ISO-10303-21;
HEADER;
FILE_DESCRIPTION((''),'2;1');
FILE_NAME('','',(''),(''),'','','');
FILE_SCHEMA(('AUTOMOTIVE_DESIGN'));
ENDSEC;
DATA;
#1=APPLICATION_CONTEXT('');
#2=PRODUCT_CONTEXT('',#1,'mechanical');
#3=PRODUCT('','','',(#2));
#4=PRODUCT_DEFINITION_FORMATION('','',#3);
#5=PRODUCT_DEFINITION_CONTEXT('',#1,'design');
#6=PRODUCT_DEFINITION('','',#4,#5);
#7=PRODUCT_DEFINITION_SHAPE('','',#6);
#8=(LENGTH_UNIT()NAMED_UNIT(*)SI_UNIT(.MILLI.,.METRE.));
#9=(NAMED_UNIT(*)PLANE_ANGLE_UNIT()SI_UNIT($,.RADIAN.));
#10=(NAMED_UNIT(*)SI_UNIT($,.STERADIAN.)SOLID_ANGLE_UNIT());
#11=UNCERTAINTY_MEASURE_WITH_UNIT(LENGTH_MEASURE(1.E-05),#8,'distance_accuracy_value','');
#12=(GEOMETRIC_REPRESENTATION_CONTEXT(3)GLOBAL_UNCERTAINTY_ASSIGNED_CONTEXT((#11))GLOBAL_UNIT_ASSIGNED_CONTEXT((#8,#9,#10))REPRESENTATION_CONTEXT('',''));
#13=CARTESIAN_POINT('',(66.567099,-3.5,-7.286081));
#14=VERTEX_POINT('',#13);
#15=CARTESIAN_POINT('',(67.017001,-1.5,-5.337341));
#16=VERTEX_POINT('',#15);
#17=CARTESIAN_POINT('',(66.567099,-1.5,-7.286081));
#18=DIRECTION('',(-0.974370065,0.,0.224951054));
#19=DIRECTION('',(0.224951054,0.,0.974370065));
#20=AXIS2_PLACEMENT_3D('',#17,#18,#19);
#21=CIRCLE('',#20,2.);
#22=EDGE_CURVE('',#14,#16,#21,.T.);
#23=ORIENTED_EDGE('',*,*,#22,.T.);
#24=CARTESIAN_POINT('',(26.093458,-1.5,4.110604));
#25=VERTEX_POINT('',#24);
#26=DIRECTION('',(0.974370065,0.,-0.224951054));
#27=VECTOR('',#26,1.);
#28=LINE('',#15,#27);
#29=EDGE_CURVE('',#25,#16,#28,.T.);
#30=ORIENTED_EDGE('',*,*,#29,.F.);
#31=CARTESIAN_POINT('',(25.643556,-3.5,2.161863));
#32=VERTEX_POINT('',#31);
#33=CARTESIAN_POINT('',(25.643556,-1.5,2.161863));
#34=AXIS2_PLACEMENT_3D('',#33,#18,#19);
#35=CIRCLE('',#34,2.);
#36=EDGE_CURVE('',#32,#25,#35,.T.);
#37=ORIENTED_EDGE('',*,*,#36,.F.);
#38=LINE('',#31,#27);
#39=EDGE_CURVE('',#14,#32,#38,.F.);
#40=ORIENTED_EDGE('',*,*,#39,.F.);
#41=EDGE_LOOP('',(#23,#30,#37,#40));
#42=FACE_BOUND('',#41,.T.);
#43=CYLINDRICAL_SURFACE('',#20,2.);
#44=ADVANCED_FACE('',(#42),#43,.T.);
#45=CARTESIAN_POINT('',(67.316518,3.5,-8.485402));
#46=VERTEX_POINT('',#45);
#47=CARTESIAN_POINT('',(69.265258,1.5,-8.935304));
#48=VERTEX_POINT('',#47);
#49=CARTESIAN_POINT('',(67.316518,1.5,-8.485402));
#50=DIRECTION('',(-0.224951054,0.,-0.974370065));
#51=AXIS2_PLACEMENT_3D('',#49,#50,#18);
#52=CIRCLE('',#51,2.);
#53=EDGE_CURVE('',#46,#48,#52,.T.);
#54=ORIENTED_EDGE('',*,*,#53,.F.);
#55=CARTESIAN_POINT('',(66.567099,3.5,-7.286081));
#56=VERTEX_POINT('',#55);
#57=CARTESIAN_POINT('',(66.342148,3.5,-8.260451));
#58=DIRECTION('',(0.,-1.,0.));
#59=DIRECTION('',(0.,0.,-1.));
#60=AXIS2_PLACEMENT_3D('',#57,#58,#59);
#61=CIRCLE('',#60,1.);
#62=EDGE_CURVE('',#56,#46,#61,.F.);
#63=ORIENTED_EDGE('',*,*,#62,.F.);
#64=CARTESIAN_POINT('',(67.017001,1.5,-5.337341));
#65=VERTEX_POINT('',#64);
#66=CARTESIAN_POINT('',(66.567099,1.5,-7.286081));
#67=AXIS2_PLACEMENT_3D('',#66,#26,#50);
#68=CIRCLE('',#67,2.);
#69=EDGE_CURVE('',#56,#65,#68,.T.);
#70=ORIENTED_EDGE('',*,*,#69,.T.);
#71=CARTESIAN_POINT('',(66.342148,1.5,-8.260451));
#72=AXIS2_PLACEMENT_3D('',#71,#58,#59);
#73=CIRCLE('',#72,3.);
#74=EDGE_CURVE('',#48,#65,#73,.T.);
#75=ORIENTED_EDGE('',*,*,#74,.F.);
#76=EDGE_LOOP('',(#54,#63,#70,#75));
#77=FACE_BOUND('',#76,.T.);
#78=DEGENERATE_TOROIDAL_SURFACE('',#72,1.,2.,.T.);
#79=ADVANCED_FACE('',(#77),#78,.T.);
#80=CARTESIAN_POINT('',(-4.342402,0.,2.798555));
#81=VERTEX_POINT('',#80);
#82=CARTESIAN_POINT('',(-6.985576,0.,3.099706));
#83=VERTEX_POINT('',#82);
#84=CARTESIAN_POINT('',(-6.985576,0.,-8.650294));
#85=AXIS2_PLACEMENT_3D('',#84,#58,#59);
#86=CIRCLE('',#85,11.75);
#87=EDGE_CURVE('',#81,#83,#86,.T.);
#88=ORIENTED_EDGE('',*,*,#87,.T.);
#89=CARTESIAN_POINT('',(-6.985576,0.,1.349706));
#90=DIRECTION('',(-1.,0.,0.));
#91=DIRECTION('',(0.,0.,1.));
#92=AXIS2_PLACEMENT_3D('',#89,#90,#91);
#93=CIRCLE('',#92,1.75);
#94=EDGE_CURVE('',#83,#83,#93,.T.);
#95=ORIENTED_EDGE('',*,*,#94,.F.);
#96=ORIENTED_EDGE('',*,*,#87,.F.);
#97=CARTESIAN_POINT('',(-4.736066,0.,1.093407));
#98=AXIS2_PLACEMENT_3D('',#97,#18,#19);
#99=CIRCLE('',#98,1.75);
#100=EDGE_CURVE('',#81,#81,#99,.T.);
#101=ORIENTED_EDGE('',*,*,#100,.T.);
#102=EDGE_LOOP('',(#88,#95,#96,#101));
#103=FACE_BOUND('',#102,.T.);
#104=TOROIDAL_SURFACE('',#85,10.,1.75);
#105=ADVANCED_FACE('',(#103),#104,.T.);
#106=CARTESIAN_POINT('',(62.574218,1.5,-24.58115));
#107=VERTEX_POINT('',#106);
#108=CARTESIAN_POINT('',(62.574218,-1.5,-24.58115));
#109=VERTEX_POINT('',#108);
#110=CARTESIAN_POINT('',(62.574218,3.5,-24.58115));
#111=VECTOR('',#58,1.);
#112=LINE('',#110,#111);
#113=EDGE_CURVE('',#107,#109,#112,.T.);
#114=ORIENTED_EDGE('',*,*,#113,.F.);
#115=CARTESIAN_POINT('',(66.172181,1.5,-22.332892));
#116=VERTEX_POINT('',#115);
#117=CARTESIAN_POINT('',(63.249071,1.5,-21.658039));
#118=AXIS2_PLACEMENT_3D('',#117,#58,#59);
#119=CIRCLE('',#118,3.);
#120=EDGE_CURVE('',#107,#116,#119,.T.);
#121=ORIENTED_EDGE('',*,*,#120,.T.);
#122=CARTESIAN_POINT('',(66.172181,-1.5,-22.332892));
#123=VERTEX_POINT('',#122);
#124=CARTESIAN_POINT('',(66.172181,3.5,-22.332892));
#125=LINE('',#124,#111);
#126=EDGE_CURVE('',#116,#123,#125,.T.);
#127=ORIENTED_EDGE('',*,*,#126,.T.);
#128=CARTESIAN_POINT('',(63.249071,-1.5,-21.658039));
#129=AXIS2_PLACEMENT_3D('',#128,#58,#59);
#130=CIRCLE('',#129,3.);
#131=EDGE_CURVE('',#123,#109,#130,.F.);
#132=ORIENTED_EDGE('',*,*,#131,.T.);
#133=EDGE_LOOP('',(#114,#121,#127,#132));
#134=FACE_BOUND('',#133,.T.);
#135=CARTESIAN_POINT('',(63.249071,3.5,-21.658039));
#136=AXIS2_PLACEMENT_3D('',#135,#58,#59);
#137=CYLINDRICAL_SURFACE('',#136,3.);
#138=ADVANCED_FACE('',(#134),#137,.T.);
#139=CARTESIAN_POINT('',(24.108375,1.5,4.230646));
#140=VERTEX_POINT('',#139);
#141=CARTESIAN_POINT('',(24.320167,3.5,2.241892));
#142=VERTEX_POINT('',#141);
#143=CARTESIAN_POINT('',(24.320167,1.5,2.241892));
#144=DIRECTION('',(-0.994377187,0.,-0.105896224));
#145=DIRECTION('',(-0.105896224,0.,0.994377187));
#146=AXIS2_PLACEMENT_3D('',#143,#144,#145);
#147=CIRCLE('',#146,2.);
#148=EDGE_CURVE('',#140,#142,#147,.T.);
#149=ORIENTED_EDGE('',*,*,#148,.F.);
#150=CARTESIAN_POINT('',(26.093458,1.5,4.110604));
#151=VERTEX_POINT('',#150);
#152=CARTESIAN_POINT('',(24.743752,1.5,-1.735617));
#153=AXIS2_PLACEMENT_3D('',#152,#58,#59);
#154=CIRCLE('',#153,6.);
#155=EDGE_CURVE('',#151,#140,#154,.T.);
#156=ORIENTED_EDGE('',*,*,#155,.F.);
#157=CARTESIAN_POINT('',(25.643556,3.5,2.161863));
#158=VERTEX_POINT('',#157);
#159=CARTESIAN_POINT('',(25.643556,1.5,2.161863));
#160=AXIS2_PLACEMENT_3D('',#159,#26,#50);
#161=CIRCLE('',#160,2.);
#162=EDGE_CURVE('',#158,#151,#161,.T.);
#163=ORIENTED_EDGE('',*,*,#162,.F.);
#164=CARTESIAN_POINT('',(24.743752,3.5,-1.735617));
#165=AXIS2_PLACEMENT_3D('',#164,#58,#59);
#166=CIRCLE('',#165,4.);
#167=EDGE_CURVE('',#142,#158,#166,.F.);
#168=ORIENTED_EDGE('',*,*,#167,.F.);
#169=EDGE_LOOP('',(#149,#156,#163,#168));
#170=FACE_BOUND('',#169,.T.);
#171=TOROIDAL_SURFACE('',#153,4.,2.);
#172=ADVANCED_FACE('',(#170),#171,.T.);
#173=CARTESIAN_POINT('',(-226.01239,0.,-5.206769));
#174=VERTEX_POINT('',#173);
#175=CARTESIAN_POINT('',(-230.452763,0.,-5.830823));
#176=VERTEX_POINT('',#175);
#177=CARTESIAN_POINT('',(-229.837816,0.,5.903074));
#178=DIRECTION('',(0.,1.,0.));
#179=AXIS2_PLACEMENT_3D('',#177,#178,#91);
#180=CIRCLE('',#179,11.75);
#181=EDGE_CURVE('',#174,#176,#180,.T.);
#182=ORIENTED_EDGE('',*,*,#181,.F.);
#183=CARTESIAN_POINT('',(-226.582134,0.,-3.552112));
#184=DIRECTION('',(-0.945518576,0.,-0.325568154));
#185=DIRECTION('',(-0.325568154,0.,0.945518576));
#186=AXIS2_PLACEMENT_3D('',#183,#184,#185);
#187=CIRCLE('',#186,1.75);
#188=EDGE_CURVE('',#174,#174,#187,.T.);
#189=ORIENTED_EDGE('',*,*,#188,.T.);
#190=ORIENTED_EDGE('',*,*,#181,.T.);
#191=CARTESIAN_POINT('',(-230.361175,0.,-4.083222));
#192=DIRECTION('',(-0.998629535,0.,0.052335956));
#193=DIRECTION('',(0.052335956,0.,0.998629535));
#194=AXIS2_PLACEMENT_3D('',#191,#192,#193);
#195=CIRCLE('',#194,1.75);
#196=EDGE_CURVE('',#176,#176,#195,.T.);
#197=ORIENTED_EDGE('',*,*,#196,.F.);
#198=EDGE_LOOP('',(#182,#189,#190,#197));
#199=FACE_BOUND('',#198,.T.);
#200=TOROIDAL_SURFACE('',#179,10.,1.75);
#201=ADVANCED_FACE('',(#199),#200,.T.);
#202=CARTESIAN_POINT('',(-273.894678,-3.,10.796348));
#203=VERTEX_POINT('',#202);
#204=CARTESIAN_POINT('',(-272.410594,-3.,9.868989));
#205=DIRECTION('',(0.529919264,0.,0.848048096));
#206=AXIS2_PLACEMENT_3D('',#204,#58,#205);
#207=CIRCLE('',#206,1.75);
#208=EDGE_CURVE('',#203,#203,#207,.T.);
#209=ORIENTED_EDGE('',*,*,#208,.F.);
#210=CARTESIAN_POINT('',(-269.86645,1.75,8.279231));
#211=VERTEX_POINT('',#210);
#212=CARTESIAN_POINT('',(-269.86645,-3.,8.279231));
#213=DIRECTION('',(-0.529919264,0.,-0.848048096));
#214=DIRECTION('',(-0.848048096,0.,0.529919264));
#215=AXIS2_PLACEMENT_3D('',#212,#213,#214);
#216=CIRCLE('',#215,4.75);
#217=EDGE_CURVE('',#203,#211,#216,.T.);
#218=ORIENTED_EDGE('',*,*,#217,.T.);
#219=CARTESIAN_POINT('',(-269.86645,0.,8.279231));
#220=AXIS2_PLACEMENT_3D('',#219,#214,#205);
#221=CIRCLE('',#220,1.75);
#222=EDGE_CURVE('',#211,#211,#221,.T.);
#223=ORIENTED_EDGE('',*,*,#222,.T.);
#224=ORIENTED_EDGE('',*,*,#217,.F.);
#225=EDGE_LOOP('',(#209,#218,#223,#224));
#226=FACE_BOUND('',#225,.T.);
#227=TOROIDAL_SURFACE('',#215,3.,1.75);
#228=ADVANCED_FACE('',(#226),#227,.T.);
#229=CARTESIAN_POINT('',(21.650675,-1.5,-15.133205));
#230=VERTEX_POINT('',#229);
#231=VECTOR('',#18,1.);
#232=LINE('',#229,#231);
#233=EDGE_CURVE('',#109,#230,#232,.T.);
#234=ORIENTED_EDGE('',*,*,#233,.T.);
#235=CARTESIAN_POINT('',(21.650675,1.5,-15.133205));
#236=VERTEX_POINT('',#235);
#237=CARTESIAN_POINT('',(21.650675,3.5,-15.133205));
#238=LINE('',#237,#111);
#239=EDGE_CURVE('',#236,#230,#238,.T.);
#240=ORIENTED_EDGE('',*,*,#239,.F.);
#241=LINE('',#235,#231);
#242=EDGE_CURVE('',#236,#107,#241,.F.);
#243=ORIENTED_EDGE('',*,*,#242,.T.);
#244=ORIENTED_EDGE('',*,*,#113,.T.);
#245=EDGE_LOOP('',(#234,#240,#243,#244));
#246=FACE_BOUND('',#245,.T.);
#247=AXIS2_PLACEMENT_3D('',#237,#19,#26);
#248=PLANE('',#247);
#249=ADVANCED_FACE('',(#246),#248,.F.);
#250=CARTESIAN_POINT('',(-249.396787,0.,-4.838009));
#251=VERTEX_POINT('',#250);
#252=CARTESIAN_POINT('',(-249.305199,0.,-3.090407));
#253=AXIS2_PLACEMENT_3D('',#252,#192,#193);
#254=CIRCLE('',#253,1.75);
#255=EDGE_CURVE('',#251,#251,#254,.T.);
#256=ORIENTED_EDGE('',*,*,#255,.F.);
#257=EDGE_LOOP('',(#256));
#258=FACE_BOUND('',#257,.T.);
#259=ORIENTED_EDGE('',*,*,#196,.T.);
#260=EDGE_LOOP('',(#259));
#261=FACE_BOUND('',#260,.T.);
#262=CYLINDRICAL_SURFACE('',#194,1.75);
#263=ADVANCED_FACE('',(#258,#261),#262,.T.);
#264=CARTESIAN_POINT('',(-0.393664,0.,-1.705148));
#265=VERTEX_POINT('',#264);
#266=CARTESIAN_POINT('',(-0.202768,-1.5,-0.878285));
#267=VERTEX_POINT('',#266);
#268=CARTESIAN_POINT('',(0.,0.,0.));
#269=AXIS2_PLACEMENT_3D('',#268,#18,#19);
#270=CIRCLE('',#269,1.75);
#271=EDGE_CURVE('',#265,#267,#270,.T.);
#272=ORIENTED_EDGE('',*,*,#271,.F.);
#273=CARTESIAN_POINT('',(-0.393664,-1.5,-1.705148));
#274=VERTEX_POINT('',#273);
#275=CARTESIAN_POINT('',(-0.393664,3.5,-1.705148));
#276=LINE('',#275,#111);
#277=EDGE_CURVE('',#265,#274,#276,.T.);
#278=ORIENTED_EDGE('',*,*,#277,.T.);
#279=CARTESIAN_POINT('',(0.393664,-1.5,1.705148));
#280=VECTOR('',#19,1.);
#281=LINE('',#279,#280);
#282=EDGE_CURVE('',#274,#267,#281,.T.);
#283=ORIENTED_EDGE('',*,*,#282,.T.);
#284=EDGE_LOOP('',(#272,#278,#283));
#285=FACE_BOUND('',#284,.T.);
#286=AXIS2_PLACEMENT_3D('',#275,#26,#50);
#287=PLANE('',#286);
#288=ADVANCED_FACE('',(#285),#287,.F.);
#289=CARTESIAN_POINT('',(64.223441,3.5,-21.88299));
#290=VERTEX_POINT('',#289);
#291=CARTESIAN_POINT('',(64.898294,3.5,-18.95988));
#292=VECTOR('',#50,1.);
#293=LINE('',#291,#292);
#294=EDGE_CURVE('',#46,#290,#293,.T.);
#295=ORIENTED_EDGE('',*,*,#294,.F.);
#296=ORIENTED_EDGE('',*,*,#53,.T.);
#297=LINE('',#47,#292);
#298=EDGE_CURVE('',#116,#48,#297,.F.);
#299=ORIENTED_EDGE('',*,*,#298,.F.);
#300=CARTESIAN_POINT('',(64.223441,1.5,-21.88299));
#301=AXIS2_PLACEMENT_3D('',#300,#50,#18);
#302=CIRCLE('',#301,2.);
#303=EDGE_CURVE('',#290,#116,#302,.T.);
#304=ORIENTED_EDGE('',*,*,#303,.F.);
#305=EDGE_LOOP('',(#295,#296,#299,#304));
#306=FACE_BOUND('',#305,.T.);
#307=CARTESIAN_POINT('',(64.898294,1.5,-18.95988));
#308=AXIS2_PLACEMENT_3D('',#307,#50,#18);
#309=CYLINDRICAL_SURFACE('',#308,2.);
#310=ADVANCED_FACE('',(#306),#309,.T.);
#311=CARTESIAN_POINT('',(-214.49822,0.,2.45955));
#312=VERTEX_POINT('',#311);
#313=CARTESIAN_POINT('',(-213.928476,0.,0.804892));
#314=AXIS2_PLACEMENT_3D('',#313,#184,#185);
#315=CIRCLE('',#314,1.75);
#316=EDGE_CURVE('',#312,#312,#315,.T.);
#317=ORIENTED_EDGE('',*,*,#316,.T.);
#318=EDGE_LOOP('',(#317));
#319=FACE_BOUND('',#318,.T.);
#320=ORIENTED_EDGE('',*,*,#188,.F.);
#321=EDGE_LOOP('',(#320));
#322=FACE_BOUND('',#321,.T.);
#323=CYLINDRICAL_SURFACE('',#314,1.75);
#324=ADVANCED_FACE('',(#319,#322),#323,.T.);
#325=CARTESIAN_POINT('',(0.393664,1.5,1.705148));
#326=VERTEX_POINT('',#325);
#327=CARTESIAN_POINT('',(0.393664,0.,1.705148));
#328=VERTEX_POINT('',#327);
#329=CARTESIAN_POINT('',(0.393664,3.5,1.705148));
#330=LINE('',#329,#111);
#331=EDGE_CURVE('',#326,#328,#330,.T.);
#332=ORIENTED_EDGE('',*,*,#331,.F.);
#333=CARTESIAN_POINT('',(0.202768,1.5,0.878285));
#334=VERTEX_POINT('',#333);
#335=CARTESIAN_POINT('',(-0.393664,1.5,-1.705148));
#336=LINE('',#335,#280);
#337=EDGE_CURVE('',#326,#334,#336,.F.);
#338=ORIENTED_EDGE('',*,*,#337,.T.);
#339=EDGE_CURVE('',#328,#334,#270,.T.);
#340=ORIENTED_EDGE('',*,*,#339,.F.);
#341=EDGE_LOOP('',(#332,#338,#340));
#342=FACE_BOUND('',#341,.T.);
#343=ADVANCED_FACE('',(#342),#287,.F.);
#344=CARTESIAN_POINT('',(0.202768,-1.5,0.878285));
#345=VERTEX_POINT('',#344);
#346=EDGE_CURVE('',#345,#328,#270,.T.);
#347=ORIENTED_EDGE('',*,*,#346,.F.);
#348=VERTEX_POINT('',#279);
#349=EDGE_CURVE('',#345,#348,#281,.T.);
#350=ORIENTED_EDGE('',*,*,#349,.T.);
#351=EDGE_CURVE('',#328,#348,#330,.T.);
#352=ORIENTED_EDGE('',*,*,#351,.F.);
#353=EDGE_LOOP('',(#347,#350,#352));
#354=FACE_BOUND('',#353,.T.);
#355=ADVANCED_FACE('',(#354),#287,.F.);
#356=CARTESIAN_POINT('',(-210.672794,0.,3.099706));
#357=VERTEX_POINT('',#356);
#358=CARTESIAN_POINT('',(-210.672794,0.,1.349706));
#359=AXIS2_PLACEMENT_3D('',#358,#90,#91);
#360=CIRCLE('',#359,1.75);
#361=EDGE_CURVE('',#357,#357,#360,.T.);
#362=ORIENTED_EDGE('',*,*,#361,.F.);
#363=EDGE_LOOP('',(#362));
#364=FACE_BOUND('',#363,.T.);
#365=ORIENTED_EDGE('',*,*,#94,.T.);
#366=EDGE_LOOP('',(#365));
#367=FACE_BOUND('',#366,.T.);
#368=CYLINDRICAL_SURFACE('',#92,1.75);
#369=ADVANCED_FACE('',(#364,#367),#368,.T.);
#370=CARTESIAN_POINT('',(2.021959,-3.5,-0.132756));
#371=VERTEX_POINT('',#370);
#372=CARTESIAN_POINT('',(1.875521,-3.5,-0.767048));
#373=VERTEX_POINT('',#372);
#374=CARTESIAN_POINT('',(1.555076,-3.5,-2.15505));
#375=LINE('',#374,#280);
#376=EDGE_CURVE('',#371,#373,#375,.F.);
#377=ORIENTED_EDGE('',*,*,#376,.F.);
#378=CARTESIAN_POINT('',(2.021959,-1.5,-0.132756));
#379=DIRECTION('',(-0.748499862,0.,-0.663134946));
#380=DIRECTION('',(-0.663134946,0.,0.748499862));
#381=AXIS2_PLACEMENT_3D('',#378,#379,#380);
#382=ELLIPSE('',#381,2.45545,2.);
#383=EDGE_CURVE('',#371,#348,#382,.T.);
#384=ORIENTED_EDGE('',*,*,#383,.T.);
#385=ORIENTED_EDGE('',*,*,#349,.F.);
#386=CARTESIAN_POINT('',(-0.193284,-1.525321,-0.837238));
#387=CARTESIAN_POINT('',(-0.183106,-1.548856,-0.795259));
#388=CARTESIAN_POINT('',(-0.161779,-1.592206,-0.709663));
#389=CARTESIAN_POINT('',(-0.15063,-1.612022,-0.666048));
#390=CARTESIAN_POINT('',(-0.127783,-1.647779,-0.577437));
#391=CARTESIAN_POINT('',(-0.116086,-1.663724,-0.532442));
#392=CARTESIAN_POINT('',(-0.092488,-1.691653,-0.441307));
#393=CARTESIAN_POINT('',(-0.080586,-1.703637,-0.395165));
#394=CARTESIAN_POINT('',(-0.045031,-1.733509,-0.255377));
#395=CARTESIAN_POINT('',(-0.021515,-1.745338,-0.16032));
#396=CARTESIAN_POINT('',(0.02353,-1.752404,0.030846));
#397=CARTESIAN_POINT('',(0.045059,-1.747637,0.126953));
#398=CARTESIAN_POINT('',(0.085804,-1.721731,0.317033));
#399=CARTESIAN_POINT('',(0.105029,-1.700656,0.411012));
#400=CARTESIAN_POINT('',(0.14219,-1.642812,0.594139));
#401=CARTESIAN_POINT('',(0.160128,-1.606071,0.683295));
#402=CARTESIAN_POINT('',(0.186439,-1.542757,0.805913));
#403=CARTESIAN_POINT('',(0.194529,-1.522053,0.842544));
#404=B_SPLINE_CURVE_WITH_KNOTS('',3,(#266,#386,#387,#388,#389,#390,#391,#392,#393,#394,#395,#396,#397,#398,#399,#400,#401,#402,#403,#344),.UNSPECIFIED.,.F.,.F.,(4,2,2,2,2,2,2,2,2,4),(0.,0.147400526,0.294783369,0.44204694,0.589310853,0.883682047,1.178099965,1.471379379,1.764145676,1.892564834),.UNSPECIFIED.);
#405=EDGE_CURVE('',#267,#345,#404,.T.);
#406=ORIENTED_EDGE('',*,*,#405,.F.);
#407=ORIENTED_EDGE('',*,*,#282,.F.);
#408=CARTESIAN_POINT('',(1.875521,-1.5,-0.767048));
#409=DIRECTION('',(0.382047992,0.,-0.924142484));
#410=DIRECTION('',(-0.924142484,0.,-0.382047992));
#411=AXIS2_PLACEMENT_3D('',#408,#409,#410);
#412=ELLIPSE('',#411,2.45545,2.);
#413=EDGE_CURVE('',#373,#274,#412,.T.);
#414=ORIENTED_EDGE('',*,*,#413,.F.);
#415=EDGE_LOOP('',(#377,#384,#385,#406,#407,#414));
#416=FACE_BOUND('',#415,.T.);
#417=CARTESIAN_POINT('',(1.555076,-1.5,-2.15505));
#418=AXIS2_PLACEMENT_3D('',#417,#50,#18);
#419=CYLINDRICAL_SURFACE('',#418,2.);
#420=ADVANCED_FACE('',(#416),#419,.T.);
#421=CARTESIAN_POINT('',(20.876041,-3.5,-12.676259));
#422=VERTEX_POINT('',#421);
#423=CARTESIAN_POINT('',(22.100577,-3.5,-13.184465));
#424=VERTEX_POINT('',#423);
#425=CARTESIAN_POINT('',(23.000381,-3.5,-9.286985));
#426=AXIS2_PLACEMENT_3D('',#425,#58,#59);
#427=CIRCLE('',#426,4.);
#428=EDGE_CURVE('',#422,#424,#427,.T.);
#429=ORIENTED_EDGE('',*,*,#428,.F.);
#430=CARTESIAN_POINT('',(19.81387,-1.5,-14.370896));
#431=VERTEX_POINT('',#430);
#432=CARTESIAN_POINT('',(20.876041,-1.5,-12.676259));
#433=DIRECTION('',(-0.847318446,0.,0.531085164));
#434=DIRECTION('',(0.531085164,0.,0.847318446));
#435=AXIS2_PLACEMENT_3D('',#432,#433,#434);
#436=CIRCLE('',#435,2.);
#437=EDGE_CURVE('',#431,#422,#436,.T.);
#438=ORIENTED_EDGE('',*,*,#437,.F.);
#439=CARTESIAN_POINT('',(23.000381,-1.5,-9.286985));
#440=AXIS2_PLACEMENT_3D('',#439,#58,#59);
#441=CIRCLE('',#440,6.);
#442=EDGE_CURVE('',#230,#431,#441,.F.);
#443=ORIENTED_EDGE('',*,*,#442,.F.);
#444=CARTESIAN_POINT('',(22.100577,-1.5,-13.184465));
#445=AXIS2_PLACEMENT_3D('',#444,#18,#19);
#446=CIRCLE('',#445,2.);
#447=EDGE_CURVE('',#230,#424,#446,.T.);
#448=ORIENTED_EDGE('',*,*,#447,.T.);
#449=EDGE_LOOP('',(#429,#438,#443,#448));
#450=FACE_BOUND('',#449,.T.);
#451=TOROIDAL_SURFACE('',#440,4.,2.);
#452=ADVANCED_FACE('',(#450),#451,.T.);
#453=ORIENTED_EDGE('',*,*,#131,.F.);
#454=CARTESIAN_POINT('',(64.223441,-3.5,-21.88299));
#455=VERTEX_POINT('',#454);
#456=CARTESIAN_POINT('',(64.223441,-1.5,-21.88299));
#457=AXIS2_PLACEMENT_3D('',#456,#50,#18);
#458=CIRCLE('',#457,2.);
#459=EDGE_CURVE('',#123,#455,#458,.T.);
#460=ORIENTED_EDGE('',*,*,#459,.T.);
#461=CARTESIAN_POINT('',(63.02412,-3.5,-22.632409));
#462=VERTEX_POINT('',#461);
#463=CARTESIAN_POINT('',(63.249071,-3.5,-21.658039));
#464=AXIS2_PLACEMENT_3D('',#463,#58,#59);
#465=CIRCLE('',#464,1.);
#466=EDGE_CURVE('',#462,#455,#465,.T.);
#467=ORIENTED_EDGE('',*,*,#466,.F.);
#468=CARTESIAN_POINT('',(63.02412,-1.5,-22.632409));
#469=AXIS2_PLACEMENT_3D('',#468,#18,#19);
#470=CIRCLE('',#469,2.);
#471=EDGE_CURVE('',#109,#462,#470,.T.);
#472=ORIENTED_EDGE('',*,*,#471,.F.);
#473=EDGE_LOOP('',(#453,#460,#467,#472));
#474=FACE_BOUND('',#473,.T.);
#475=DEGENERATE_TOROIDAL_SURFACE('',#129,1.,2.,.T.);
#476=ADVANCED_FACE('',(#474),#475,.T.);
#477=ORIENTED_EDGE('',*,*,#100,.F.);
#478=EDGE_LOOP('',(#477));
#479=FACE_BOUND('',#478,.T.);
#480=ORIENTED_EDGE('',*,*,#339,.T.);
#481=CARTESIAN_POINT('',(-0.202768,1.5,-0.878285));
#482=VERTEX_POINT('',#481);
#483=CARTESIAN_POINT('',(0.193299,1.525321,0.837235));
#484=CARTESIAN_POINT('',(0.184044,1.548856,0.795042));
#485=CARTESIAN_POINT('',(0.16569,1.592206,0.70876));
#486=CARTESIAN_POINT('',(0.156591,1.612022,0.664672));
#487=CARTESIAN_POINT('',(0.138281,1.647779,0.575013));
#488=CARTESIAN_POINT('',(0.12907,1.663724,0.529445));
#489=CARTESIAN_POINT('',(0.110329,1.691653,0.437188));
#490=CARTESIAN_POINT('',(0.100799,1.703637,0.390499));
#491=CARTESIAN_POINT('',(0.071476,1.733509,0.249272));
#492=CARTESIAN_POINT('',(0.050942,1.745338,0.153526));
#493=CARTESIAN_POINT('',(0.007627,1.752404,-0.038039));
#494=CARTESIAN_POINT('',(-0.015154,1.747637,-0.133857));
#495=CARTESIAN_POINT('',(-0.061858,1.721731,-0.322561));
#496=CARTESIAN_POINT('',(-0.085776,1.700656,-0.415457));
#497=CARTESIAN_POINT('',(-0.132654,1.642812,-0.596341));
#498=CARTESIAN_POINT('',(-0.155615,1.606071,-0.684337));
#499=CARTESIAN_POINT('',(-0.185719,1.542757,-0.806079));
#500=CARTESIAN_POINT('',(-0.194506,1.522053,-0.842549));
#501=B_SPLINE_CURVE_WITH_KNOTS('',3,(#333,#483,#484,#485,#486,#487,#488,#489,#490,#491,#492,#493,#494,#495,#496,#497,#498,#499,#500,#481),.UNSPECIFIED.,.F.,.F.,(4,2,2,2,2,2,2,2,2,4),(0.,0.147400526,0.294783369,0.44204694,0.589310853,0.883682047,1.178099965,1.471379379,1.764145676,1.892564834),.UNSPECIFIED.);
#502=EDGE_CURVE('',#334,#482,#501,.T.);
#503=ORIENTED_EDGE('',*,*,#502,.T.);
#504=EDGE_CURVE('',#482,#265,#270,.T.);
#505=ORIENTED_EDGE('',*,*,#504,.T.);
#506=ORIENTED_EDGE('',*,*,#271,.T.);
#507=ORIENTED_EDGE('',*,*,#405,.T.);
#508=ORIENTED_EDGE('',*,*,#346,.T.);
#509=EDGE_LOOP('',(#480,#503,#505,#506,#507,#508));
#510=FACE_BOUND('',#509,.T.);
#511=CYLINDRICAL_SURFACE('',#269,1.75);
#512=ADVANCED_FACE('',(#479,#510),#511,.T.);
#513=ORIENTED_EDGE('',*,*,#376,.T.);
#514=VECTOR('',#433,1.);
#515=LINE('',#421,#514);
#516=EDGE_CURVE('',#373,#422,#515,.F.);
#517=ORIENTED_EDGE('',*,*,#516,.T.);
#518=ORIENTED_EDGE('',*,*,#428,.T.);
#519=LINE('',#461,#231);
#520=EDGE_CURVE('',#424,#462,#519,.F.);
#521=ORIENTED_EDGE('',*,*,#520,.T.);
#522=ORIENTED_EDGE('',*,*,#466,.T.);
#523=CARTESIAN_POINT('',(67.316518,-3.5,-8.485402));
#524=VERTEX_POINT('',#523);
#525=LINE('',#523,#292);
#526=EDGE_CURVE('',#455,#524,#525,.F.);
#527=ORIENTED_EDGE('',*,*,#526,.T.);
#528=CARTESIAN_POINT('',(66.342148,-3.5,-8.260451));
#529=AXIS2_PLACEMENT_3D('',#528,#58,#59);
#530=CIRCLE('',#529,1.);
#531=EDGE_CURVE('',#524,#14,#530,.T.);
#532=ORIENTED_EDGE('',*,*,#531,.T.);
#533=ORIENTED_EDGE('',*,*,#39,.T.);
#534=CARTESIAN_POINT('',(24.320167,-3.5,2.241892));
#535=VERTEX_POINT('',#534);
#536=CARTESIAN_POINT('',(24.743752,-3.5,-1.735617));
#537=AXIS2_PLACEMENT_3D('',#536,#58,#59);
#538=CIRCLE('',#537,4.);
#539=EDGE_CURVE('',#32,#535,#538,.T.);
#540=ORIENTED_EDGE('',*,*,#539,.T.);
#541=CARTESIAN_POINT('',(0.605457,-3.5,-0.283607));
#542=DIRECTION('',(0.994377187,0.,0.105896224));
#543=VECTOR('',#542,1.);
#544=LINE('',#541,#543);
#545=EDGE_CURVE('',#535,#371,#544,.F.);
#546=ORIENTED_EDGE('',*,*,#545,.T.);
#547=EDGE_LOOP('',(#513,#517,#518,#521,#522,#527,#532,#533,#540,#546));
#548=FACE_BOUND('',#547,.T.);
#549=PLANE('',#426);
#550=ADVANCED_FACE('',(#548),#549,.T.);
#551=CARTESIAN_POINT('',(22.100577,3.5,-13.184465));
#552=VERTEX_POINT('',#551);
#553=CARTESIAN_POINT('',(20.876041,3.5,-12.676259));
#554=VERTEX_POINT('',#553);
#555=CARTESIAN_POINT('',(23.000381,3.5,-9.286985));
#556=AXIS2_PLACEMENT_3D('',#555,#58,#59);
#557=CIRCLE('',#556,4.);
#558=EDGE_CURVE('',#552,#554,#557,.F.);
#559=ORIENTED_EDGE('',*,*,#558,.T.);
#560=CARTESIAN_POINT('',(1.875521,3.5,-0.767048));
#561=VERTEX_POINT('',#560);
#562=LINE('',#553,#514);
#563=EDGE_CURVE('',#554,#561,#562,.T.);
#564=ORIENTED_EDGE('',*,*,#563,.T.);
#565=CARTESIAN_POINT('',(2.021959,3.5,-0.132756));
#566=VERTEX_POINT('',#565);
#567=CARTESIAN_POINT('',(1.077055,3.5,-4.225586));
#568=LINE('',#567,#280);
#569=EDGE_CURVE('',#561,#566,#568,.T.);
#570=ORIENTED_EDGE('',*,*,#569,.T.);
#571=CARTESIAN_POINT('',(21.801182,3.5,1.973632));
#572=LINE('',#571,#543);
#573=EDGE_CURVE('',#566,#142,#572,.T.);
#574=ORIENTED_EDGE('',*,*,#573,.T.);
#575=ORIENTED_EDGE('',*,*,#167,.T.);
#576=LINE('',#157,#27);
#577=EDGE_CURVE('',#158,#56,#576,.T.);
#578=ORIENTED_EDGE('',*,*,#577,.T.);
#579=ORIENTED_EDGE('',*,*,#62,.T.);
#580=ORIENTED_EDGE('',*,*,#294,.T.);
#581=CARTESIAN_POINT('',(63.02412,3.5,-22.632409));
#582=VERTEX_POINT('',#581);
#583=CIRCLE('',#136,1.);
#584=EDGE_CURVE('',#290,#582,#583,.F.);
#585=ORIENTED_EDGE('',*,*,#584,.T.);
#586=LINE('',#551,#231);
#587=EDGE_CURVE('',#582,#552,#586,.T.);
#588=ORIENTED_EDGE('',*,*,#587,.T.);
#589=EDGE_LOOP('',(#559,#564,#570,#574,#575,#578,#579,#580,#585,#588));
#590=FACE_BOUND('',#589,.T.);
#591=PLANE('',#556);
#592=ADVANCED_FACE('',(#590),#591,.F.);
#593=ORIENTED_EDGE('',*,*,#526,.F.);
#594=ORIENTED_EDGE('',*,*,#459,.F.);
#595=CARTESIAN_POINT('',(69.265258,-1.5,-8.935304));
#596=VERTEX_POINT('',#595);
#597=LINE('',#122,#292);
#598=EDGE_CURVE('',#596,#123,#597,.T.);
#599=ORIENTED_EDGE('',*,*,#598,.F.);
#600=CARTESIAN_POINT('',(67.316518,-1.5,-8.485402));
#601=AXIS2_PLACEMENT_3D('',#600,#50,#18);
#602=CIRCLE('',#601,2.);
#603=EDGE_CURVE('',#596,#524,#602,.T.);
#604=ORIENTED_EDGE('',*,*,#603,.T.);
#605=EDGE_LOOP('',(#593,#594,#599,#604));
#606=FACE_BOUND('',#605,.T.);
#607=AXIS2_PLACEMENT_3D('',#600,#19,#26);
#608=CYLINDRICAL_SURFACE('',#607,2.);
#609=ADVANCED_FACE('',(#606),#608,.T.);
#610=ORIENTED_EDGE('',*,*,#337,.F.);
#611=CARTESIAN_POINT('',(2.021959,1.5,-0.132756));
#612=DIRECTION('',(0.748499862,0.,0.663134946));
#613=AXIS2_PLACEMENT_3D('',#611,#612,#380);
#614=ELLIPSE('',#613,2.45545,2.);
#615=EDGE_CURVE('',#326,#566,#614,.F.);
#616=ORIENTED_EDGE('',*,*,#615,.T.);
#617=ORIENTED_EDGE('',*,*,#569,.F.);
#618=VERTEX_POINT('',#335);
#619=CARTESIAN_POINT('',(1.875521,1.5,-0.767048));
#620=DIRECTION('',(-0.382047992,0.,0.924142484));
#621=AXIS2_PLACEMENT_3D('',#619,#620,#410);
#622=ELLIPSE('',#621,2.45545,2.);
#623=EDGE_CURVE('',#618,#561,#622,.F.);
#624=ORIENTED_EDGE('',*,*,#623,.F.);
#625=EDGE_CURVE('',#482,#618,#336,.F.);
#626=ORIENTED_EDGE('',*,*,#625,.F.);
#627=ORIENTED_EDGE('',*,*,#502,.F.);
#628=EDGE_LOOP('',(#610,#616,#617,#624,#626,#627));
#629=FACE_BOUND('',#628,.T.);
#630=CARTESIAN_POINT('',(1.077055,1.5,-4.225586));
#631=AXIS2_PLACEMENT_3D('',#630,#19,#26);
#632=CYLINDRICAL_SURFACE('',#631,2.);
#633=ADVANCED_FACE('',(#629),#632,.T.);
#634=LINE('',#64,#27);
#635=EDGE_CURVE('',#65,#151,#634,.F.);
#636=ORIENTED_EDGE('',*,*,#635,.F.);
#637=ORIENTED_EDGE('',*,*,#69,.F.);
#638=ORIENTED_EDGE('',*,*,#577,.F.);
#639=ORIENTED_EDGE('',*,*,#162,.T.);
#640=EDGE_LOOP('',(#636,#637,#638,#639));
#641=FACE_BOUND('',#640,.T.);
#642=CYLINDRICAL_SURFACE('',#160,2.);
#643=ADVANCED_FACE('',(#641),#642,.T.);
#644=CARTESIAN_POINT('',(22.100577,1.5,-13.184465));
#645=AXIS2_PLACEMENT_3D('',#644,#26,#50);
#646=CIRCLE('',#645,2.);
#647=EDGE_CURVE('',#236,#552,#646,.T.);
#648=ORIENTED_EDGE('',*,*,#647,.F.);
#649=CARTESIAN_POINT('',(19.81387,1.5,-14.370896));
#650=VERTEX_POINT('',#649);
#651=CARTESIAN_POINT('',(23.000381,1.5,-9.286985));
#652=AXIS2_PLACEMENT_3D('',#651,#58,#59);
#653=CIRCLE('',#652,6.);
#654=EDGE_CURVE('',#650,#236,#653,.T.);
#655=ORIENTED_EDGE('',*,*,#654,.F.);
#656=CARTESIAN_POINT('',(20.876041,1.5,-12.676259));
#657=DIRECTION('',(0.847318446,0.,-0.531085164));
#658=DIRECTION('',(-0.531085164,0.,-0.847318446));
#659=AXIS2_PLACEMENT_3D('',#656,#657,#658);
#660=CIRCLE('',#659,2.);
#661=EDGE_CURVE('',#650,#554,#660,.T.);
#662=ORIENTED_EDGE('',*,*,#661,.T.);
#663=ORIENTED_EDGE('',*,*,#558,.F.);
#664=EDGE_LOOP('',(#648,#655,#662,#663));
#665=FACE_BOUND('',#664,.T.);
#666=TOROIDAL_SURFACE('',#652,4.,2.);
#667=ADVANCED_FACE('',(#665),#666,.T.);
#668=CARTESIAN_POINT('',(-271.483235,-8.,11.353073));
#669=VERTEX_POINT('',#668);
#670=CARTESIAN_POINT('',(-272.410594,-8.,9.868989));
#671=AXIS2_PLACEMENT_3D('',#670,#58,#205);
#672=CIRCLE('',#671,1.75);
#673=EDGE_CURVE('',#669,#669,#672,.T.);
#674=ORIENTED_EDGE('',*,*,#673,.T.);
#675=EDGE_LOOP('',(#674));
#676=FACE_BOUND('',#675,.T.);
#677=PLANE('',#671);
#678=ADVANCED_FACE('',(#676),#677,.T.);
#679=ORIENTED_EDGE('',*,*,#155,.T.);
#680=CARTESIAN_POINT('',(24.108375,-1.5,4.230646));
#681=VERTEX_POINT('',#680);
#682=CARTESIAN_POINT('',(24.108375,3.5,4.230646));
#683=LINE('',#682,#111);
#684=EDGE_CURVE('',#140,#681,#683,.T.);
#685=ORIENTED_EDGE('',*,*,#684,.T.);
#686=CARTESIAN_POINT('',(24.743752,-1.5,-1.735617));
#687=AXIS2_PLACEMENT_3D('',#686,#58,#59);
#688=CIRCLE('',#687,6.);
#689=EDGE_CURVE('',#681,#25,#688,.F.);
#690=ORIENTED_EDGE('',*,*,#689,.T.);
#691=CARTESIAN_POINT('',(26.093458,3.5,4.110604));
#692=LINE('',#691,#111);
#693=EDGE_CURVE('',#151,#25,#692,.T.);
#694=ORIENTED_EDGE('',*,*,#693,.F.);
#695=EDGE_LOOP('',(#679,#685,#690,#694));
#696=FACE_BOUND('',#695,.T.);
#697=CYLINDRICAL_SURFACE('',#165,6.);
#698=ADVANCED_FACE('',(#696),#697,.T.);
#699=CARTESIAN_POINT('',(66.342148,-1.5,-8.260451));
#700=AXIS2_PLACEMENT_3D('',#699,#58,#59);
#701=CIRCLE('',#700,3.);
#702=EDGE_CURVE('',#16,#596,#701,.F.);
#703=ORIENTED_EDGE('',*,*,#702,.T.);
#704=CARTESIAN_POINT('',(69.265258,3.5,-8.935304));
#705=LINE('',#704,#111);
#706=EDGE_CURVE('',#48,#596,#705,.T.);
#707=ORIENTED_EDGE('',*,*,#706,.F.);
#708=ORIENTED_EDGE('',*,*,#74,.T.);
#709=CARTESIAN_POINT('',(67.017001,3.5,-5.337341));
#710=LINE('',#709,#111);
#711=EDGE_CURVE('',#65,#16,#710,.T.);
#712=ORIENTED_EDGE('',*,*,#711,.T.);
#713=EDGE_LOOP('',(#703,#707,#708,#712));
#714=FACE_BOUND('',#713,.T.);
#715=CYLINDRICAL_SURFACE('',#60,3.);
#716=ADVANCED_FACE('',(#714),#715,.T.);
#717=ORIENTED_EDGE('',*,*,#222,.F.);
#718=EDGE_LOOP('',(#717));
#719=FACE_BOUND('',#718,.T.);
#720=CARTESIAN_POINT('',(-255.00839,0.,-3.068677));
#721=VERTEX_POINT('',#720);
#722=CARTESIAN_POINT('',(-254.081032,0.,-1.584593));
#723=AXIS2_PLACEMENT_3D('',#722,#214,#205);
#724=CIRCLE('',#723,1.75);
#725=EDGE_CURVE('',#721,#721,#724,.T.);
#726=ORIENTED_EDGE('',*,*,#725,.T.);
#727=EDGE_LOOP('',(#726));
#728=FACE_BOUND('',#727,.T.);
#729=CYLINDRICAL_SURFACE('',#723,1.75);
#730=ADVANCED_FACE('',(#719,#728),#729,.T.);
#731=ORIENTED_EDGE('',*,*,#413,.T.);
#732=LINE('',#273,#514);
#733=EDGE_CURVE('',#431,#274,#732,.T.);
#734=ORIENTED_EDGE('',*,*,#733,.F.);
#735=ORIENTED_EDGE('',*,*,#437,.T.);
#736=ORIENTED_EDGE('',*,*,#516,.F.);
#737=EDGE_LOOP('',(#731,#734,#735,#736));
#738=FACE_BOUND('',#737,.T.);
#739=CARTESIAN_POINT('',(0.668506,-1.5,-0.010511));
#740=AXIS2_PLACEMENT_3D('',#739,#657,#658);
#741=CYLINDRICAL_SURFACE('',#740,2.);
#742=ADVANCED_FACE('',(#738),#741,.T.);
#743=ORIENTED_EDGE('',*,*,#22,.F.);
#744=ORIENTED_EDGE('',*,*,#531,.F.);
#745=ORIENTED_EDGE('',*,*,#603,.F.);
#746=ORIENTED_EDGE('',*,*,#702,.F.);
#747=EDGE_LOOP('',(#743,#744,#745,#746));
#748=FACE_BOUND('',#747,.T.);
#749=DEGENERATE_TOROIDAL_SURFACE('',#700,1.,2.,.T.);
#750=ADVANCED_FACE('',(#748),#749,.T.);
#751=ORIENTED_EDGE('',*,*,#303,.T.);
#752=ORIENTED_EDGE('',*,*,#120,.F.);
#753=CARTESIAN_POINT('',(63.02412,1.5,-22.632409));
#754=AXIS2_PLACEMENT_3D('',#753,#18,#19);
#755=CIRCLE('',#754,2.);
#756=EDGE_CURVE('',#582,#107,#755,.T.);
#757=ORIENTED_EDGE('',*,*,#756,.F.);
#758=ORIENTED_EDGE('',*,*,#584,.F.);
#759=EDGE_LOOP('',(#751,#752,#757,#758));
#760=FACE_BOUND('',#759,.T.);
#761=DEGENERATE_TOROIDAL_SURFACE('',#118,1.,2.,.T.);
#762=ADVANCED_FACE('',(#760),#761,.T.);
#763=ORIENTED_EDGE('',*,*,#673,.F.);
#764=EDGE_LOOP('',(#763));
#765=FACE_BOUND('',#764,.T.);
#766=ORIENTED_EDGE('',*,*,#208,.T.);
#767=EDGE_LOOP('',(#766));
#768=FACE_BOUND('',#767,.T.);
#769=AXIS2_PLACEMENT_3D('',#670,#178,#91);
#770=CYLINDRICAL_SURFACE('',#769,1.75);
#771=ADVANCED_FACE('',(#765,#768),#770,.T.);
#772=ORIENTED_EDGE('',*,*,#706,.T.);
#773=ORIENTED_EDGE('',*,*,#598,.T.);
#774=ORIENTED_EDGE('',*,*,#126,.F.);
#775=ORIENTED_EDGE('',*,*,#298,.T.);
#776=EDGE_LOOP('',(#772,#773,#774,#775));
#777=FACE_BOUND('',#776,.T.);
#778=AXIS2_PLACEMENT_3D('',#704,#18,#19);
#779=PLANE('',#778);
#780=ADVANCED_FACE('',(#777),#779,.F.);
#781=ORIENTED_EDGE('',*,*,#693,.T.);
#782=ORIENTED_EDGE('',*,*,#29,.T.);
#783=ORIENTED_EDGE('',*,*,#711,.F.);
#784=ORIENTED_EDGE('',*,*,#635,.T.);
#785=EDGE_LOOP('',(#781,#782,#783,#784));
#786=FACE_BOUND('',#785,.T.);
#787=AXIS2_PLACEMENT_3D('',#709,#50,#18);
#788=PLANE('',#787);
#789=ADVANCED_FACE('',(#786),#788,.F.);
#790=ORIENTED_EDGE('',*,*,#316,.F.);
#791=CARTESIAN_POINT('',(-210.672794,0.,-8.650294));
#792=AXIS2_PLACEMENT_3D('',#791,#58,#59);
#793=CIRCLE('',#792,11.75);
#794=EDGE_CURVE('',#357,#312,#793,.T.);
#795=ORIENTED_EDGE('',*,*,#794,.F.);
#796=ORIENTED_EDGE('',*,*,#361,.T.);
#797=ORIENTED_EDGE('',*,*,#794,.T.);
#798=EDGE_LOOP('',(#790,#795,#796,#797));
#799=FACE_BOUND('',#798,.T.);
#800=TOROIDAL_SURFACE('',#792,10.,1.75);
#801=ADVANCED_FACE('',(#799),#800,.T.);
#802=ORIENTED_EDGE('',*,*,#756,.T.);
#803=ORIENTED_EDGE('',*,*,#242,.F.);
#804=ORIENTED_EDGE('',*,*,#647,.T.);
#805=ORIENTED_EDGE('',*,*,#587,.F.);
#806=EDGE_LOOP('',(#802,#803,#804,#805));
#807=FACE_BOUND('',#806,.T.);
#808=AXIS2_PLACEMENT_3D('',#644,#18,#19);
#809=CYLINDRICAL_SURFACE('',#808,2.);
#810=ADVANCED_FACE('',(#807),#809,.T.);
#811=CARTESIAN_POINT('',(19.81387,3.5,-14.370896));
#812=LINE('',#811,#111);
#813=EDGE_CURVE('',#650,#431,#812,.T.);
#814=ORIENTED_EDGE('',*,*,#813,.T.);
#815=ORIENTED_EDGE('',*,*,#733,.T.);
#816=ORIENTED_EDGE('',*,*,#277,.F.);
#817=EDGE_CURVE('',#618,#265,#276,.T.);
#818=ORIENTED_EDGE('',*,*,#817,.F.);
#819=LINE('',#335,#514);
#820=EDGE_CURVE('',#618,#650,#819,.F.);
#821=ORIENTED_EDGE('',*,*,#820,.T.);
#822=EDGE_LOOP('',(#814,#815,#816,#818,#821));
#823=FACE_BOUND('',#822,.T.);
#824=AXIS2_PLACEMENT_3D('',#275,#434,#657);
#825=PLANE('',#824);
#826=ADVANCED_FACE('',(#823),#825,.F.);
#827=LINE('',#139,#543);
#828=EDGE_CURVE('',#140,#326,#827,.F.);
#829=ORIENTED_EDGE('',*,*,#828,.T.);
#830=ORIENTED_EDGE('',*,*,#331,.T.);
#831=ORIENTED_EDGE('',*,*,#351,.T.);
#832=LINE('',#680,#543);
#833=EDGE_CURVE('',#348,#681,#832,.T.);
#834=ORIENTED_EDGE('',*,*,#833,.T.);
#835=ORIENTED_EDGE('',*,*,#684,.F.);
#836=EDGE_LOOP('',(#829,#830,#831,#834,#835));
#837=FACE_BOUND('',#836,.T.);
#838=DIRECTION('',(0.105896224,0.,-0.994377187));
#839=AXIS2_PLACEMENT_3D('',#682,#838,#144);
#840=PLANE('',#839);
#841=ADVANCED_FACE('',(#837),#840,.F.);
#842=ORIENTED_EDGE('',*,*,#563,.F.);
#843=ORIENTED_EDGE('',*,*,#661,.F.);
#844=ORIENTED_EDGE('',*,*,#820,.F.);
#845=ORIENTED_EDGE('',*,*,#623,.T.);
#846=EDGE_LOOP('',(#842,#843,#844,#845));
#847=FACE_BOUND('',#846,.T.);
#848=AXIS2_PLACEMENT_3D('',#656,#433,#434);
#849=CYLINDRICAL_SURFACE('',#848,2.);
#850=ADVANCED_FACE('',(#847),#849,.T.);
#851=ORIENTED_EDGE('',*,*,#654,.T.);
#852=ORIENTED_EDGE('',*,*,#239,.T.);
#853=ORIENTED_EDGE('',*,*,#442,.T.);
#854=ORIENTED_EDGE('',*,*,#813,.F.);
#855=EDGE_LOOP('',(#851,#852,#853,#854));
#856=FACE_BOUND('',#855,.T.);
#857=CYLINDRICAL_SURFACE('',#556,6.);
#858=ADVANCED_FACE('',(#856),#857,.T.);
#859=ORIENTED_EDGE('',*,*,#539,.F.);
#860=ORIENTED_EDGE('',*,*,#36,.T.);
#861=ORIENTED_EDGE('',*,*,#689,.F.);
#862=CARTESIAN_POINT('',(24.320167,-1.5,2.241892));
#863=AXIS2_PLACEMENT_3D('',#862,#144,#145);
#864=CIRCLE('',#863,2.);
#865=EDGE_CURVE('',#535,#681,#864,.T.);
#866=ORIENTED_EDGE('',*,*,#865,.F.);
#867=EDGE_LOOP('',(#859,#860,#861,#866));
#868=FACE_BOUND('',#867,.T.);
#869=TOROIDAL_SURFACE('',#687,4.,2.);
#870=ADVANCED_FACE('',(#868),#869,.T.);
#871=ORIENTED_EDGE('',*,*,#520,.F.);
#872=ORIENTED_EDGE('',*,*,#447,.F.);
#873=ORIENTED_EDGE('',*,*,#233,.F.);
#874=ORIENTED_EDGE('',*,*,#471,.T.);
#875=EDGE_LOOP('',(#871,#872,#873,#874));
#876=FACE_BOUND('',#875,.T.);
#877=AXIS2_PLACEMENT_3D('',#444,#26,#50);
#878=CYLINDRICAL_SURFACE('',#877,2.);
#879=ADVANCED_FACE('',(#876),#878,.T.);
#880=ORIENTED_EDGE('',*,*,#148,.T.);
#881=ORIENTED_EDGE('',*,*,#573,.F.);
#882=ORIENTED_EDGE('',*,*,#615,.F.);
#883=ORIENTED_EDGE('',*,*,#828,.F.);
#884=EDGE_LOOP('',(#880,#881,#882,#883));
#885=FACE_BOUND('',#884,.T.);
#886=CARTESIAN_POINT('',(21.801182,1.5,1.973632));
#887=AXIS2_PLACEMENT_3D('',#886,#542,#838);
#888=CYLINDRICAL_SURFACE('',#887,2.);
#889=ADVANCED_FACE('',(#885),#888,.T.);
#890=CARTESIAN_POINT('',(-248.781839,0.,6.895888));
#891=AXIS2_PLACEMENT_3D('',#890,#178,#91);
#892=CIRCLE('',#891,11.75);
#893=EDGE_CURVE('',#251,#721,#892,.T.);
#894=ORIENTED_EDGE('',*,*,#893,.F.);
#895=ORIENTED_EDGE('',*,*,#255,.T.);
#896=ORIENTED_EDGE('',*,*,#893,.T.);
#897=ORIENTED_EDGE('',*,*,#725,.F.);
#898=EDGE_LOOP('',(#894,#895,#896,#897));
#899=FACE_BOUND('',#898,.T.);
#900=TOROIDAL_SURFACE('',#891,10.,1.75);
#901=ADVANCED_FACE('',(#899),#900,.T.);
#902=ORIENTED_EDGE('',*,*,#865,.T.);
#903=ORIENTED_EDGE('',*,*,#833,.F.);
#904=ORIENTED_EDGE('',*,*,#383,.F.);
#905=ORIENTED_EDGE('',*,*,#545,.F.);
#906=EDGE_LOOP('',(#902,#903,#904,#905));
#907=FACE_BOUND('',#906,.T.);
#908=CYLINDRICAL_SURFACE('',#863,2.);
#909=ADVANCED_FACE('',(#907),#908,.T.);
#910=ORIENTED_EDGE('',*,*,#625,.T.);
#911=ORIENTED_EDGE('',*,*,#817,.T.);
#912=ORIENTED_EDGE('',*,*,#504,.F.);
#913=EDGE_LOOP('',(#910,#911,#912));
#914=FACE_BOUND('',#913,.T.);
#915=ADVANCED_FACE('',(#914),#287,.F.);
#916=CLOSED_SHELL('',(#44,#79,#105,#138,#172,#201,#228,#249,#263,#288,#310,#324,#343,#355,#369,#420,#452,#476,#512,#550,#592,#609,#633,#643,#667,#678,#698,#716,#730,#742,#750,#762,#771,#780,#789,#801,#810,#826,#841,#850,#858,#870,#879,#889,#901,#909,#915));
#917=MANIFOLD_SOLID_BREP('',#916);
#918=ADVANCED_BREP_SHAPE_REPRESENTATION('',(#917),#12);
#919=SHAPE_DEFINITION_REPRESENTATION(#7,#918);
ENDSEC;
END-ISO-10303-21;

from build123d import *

# Parameters (mm, degrees)
SKETCH11_R          = 1.75
SKETCH8_R           = 1.75
BOSS_EXTRUDE1_DEPTH = 3.5
FILLET1_R           = 2
FILLET2_R           = 2


with BuildPart() as part:
    # Sweep1: sweep along a path in Sketch1
    with BuildLine(Plane(origin=(0, 0, 0), x_dir=(1, 0, 0), z_dir=(0, 1, 0))) as sweep1_path:
        Line((0, 0), (-4.736065928, -1.093406974))
        ThreePointArc((-4.736065928, -1.093406974), (-5.853544334, -1.285424883), (-6.985576472, -1.349706326))
        Line((-6.985576472, -1.349706326), (-210.672794298, -1.349706326))
        ThreePointArc((-210.672794298, -1.349706326), (-212.323270357, -1.212562341), (-213.928475842, -0.804892082))
        Line((-213.928475842, -0.804892082), (-226.582134244, 3.552111915))
        ThreePointArc((-226.582134244, 3.552111915), (-228.446084779, 3.999606846), (-230.361175351, 4.083221506))
        Line((-230.361175351, 4.083221506), (-249.305198661, 3.090407314))
        ThreePointArc((-249.305198661, 3.090407314), (-251.788897094, 2.641281474), (-254.081031741, 1.584592928))
        Line((-254.081031741, 1.584592928), (-268.848792164, -7.643327957))
    # Sketch11 → Sweep1 (sweep)
    with BuildSketch(Plane(origin=(0, 0, 0), x_dir=(0.22495105434386561, 0, 0.9743700647852351), z_dir=(-0.9743700647852351, 0, 0.22495105434386561))):
        Circle(SKETCH11_R)
    sweep(path=sweep1_path.line)

    # Sweep3: sweep along a curve in space
    with BuildLine() as sweep3_path:
        Line((-272.410594168, -3, 9.868988866), (-272.410594168, -8, 9.868988866))
        ThreePointArc((-269.866449879, 0, 8.279231074), (-271.665431558, -0.878679656, 9.403359589), (-272.410594168, -3, 9.868988866))
        Line((-269.866449879, 0, 8.279231074), (-268.848792164, 0, 7.643327957))
    # Sketch8 → Sweep3 (sweep)
    with BuildSketch(Plane(origin=(-196.787061579, 0, 122.966203633), x_dir=(0.5299192642332071, 0, 0.8480480961564246), z_dir=(-0.8480480961564246, 0, 0.5299192642332071))):
        with Locations((-135.986244411, 0)):
            Circle(SKETCH8_R)
    sweep(path=sweep3_path.line)

    # Sketch5 → Boss-Extrude1 (add, symmetric)
    with BuildSketch(Plane(origin=(0, 0, 0), x_dir=(1, 0, 0), z_dir=(0, 1, 0))):
        with BuildLine():
            Line((-0.393664345, 1.705147613), (19.813870271, 14.370895509))
            ThreePointArc((19.813870271, 14.370895509), (20.700469104, 14.828681695), (21.650674926, 15.133205221))
            Line((21.650674926, 15.133205221), (62.574217647, 24.581149504))
            ThreePointArc((62.574217647, 24.581149504), (64.838828602, 24.202183598), (66.172181004, 22.332892472))
            Line((66.172181004, 22.332892472), (69.265258001, 8.935304082))
            ThreePointArc((69.265258001, 8.935304082), (68.886292095, 6.670693126), (67.01700097, 5.337340724))
            Line((67.01700097, 5.337340724), (26.093458249, -4.110603558))
            ThreePointArc((26.093458249, -4.110603558), (25.105924586, -4.253442442), (24.108374578, -4.230646291))
            Line((24.108374578, -4.230646291), (0.393664345, -1.705147613))
            Line((0.393664345, -1.705147613), (-0.393664345, 1.705147613))
        make_face()
    extrude(amount=BOSS_EXTRUDE1_DEPTH, both=True)

    # Fillet1
    # the kernel refuses this fillet: 2 mm, written as the material it takes off along each edge
    with BuildSketch(Plane(origin=(23.000381252, 3.5, -9.286984832), x_dir=(-0.5310851635150788, 0, -0.8473184460957769), z_dir=(-0.8473184460957769, 0, 0.5310851635150788))) as fillet1_piece_1:
        with BuildLine():
            CenterArc((6 - FILLET1_R, FILLET1_R), FILLET1_R, 270, 90)
            Line((6, FILLET1_R), (6, 0))
            Line((6, 0), (6 - FILLET1_R, 0))
        make_face()
    revolve(axis=Axis((23.000381252, 3.5, -9.286984832), (0, -1, 0)), revolution_arc=19.078804313, mode=Mode.SUBTRACT)
    with BuildSketch(Plane(origin=(-4.630256576, 3.5, 0.950278204), x_dir=(0, -1, 0), z_dir=(0.8473184460957748, 0, -0.5310851635150823))) as fillet1_piece_2_section:
        with BuildLine():
            CenterArc((FILLET1_R, -FILLET1_R), FILLET1_R, 90, 90)
            Line((0, -FILLET1_R), (0, 0))
            Line((0, 0), (FILLET1_R, 0))
        make_face()
    fillet1_piece_2 = extrude(amount=28.848807622, mode=Mode.PRIVATE)
    fillet1_piece_2 = split(fillet1_piece_2, bisect_by=Plane(origin=(-1.099290547, 3.044511154, -4.761550481), z_dir=(0.9743700647852351, 0, -0.22495105434386561)), keep=Keep.TOP, mode=Mode.PRIVATE)
    add(fillet1_piece_2, mode=Mode.SUBTRACT)
    with BuildSketch(Plane(origin=(1.518419617, 3.5, 6.576997937), x_dir=(0, -1, 0), z_dir=(-0.22495105434386561, 0, -0.9743700647852351))) as fillet1_piece_3_section:
        with BuildLine():
            CenterArc((FILLET1_R, -FILLET1_R), FILLET1_R, 90, 90)
            Line((0, -FILLET1_R), (0, 0))
            Line((0, 0), (FILLET1_R, 0))
        make_face()
    fillet1_piece_3 = extrude(amount=13.5, mode=Mode.PRIVATE)
    fillet1_piece_3 = fillet1_piece_3 - Plane(origin=(0.460325238, 0, -0.106274455), x_dir=(0.22495105434386553, 0, 0.9743700647852351), z_dir=(-0.9743700647852351, 0, 0.22495105434386553)) * Cylinder(1.75, 36, mode=Mode.PRIVATE)
    add(fillet1_piece_3, mode=Mode.SUBTRACT)
    with BuildSketch(Plane(origin=(24.108374578, 3.5, 4.230646291), x_dir=(0, -1, 0), z_dir=(-0.9943771868431155, 0, -0.10589622413463053))) as fillet1_piece_4_section:
        with BuildLine():
            CenterArc((FILLET1_R, -FILLET1_R), FILLET1_R, 90, 90)
            Line((0, -FILLET1_R), (0, 0))
            Line((0, 0), (FILLET1_R, 0))
        make_face()
    fillet1_piece_4 = extrude(amount=28.848807622, mode=Mode.PRIVATE)
    fillet1_piece_4 = split(fillet1_piece_4, bisect_by=Plane(origin=(1.099289941, 3.044511564, 4.761547859), z_dir=(0.9743700647852351, 0, -0.22495105434386561)), keep=Keep.TOP, mode=Mode.PRIVATE)
    add(fillet1_piece_4, mode=Mode.SUBTRACT)
    with BuildSketch(Plane(origin=(24.743751923, 3.5, -1.73561683), x_dir=(0.22495105434386634, 0, 0.9743700647852349), z_dir=(0.9743700647852349, 0, -0.22495105434386634))) as fillet1_piece_5:
        with BuildLine():
            CenterArc((6 - FILLET1_R, FILLET1_R), FILLET1_R, 270, 90)
            Line((6, FILLET1_R), (6, 0))
            Line((6, 0), (6 - FILLET1_R, 0))
        make_face()
    revolve(axis=Axis((24.743751923, 3.5, -1.73561683), (0, -1, 0)), revolution_arc=19.078804313, mode=Mode.SUBTRACT)
    with BuildSketch(Plane(origin=(67.01700097, 3.5, -5.337340724), x_dir=(-0.22495105434386584, 0, -0.9743700647852351), z_dir=(-0.9743700647852351, 0, 0.22495105434386584)), Plane(origin=(21.650674926, 3.5, -15.133205221), x_dir=(0.22495105434386575, 0, 0.974370064785235), z_dir=(0.9743700647852351, 0, -0.22495105434386578))) as fillet1_piece_6:
        with BuildLine():
            CenterArc((FILLET1_R, FILLET1_R), FILLET1_R, 180, 90)
            Line((0, FILLET1_R), (0, 0))
            Line((0, 0), (FILLET1_R, 0))
        make_face()
    extrude(amount=42, mode=Mode.SUBTRACT)
    with BuildSketch(Plane(origin=(66.342147807, 3.5, -8.260450918), x_dir=(0.9743700647852359, 0, -0.22495105434386237), z_dir=(-0.22495105434386237, 0, -0.9743700647852359))) as fillet1_piece_7:
        with BuildLine():
            CenterArc((3 - FILLET1_R, FILLET1_R), FILLET1_R, 270, 90)
            Line((3, FILLET1_R), (3, 0))
            Line((3, 0), (3 - FILLET1_R, 0))
        make_face()
    revolve(axis=Axis((66.342147807, 3.5, -8.260450918), (0, -1, 0)), revolution_arc=90, mode=Mode.SUBTRACT)
    with BuildSketch(Plane(origin=(66.172181004, 3.5, -22.332892472), x_dir=(-0.9743700647852351, 0, 0.22495105434386561), z_dir=(0.2249510543438656, 0, 0.9743700647852351))) as fillet1_piece_8:
        with BuildLine():
            CenterArc((FILLET1_R, FILLET1_R), FILLET1_R, 180, 90)
            Line((0, FILLET1_R), (0, 0))
            Line((0, 0), (FILLET1_R, 0))
        make_face()
    extrude(amount=13.75, mode=Mode.SUBTRACT)
    with BuildSketch(Plane(origin=(63.24907081, 3.5, -21.658039309), x_dir=(-0.22495105434387033, 0, -0.974370064785234), z_dir=(-0.974370064785234, 0, 0.22495105434387033))) as fillet1_piece_9:
        with BuildLine():
            CenterArc((3 - FILLET1_R, FILLET1_R), FILLET1_R, 270, 90)
            Line((3, FILLET1_R), (3, 0))
            Line((3, 0), (3 - FILLET1_R, 0))
        make_face()
    revolve(axis=Axis((63.24907081, 3.5, -21.658039309), (0, -1, 0)), revolution_arc=90, mode=Mode.SUBTRACT)

    # Fillet2
    # the kernel refuses this fillet: 2 mm, written as the material it takes off along each edge
    with BuildSketch(Plane(origin=(23.000381252, -3.5, -9.286984832), x_dir=(-0.5310851635150788, 0, -0.8473184460957769), z_dir=(-0.8473184460957769, 0, 0.5310851635150788))) as fillet2_piece_1:
        with BuildLine():
            CenterArc((6 - FILLET2_R, -FILLET2_R), FILLET2_R, 0, 90)
            Line((6, -FILLET2_R), (6, 0))
            Line((6, 0), (6 - FILLET2_R, 0))
        make_face()
    revolve(axis=Axis((23.000381252, -3.5, -9.286984832), (0, -1, 0)), revolution_arc=19.078804313, mode=Mode.SUBTRACT)
    with BuildSketch(Plane(origin=(-4.630256576, -3.5, 0.950278204), x_dir=(0, 1, 0), z_dir=(0.8473184460957748, 0, -0.5310851635150823))) as fillet2_piece_2_section:
        with BuildLine():
            CenterArc((FILLET2_R, FILLET2_R), FILLET2_R, 180, 90)
            Line((0, FILLET2_R), (0, 0))
            Line((0, 0), (FILLET2_R, 0))
        make_face()
    fillet2_piece_2 = extrude(amount=28.848807622, mode=Mode.PRIVATE)
    fillet2_piece_2 = split(fillet2_piece_2, bisect_by=Plane(origin=(-1.099290547, -3.044511154, -4.761550481), z_dir=(0.9743700647852351, 0, -0.22495105434386561)), keep=Keep.TOP, mode=Mode.PRIVATE)
    add(fillet2_piece_2, mode=Mode.SUBTRACT)
    with BuildSketch(Plane(origin=(1.518419617, -3.5, 6.576997937), x_dir=(0, 1, 0), z_dir=(-0.22495105434386561, 0, -0.9743700647852351))) as fillet2_piece_3_section:
        with BuildLine():
            CenterArc((FILLET2_R, FILLET2_R), FILLET2_R, 180, 90)
            Line((0, FILLET2_R), (0, 0))
            Line((0, 0), (FILLET2_R, 0))
        make_face()
    fillet2_piece_3 = extrude(amount=13.5, mode=Mode.PRIVATE)
    fillet2_piece_3 = fillet2_piece_3 - Plane(origin=(0.460325238, 0, -0.106274455), x_dir=(0.22495105434386553, 0, 0.9743700647852351), z_dir=(-0.9743700647852351, 0, 0.22495105434386553)) * Cylinder(1.75, 36, mode=Mode.PRIVATE)
    add(fillet2_piece_3, mode=Mode.SUBTRACT)
    with BuildSketch(Plane(origin=(24.108374578, -3.5, 4.230646291), x_dir=(0, 1, 0), z_dir=(-0.9943771868431155, 0, -0.10589622413463053))) as fillet2_piece_4_section:
        with BuildLine():
            CenterArc((FILLET2_R, FILLET2_R), FILLET2_R, 180, 90)
            Line((0, FILLET2_R), (0, 0))
            Line((0, 0), (FILLET2_R, 0))
        make_face()
    fillet2_piece_4 = extrude(amount=28.848807622, mode=Mode.PRIVATE)
    fillet2_piece_4 = split(fillet2_piece_4, bisect_by=Plane(origin=(1.099289941, -3.044511564, 4.761547859), z_dir=(0.9743700647852351, 0, -0.22495105434386561)), keep=Keep.TOP, mode=Mode.PRIVATE)
    add(fillet2_piece_4, mode=Mode.SUBTRACT)
    with BuildSketch(Plane(origin=(24.743751923, -3.5, -1.73561683), x_dir=(0.22495105434386634, 0, 0.9743700647852349), z_dir=(0.9743700647852349, 0, -0.22495105434386634))) as fillet2_piece_5:
        with BuildLine():
            CenterArc((6 - FILLET2_R, -FILLET2_R), FILLET2_R, 0, 90)
            Line((6, -FILLET2_R), (6, 0))
            Line((6, 0), (6 - FILLET2_R, 0))
        make_face()
    revolve(axis=Axis((24.743751923, -3.5, -1.73561683), (0, -1, 0)), revolution_arc=19.078804313, mode=Mode.SUBTRACT)
    with BuildSketch(Plane(origin=(67.01700097, -3.5, -5.337340724), x_dir=(-0.22495105434386584, 0, -0.9743700647852351), z_dir=(-0.9743700647852351, 0, 0.22495105434386584)), Plane(origin=(21.650674926, -3.5, -15.133205221), x_dir=(0.22495105434386575, 0, 0.974370064785235), z_dir=(0.9743700647852351, 0, -0.22495105434386578))) as fillet2_piece_6:
        with BuildLine():
            CenterArc((FILLET2_R, -FILLET2_R), FILLET2_R, 90, 90)
            Line((0, -FILLET2_R), (0, 0))
            Line((0, 0), (FILLET2_R, 0))
        make_face()
    extrude(amount=42, mode=Mode.SUBTRACT)
    with BuildSketch(Plane(origin=(66.342147807, -3.5, -8.260450918), x_dir=(0.9743700647852359, 0, -0.22495105434386237), z_dir=(-0.22495105434386237, 0, -0.9743700647852359))) as fillet2_piece_7:
        with BuildLine():
            CenterArc((3 - FILLET2_R, -FILLET2_R), FILLET2_R, 0, 90)
            Line((3, -FILLET2_R), (3, 0))
            Line((3, 0), (3 - FILLET2_R, 0))
        make_face()
    revolve(axis=Axis((66.342147807, -3.5, -8.260450918), (0, -1, 0)), revolution_arc=90, mode=Mode.SUBTRACT)
    with BuildSketch(Plane(origin=(66.172181004, -3.5, -22.332892472), x_dir=(-0.9743700647852351, 0, 0.22495105434386561), z_dir=(0.2249510543438656, 0, 0.9743700647852351))) as fillet2_piece_8:
        with BuildLine():
            CenterArc((FILLET2_R, -FILLET2_R), FILLET2_R, 90, 90)
            Line((0, -FILLET2_R), (0, 0))
            Line((0, 0), (FILLET2_R, 0))
        make_face()
    extrude(amount=13.75, mode=Mode.SUBTRACT)
    with BuildSketch(Plane(origin=(63.24907081, -3.5, -21.658039309), x_dir=(-0.22495105434387033, 0, -0.974370064785234), z_dir=(-0.974370064785234, 0, 0.22495105434387033))) as fillet2_piece_9:
        with BuildLine():
            CenterArc((3 - FILLET2_R, -FILLET2_R), FILLET2_R, 0, 90)
            Line((3, -FILLET2_R), (3, 0))
            Line((3, 0), (3 - FILLET2_R, 0))
        make_face()
    revolve(axis=Axis((63.24907081, -3.5, -21.658039309), (0, -1, 0)), revolution_arc=90, mode=Mode.SUBTRACT)


solid = part.part
